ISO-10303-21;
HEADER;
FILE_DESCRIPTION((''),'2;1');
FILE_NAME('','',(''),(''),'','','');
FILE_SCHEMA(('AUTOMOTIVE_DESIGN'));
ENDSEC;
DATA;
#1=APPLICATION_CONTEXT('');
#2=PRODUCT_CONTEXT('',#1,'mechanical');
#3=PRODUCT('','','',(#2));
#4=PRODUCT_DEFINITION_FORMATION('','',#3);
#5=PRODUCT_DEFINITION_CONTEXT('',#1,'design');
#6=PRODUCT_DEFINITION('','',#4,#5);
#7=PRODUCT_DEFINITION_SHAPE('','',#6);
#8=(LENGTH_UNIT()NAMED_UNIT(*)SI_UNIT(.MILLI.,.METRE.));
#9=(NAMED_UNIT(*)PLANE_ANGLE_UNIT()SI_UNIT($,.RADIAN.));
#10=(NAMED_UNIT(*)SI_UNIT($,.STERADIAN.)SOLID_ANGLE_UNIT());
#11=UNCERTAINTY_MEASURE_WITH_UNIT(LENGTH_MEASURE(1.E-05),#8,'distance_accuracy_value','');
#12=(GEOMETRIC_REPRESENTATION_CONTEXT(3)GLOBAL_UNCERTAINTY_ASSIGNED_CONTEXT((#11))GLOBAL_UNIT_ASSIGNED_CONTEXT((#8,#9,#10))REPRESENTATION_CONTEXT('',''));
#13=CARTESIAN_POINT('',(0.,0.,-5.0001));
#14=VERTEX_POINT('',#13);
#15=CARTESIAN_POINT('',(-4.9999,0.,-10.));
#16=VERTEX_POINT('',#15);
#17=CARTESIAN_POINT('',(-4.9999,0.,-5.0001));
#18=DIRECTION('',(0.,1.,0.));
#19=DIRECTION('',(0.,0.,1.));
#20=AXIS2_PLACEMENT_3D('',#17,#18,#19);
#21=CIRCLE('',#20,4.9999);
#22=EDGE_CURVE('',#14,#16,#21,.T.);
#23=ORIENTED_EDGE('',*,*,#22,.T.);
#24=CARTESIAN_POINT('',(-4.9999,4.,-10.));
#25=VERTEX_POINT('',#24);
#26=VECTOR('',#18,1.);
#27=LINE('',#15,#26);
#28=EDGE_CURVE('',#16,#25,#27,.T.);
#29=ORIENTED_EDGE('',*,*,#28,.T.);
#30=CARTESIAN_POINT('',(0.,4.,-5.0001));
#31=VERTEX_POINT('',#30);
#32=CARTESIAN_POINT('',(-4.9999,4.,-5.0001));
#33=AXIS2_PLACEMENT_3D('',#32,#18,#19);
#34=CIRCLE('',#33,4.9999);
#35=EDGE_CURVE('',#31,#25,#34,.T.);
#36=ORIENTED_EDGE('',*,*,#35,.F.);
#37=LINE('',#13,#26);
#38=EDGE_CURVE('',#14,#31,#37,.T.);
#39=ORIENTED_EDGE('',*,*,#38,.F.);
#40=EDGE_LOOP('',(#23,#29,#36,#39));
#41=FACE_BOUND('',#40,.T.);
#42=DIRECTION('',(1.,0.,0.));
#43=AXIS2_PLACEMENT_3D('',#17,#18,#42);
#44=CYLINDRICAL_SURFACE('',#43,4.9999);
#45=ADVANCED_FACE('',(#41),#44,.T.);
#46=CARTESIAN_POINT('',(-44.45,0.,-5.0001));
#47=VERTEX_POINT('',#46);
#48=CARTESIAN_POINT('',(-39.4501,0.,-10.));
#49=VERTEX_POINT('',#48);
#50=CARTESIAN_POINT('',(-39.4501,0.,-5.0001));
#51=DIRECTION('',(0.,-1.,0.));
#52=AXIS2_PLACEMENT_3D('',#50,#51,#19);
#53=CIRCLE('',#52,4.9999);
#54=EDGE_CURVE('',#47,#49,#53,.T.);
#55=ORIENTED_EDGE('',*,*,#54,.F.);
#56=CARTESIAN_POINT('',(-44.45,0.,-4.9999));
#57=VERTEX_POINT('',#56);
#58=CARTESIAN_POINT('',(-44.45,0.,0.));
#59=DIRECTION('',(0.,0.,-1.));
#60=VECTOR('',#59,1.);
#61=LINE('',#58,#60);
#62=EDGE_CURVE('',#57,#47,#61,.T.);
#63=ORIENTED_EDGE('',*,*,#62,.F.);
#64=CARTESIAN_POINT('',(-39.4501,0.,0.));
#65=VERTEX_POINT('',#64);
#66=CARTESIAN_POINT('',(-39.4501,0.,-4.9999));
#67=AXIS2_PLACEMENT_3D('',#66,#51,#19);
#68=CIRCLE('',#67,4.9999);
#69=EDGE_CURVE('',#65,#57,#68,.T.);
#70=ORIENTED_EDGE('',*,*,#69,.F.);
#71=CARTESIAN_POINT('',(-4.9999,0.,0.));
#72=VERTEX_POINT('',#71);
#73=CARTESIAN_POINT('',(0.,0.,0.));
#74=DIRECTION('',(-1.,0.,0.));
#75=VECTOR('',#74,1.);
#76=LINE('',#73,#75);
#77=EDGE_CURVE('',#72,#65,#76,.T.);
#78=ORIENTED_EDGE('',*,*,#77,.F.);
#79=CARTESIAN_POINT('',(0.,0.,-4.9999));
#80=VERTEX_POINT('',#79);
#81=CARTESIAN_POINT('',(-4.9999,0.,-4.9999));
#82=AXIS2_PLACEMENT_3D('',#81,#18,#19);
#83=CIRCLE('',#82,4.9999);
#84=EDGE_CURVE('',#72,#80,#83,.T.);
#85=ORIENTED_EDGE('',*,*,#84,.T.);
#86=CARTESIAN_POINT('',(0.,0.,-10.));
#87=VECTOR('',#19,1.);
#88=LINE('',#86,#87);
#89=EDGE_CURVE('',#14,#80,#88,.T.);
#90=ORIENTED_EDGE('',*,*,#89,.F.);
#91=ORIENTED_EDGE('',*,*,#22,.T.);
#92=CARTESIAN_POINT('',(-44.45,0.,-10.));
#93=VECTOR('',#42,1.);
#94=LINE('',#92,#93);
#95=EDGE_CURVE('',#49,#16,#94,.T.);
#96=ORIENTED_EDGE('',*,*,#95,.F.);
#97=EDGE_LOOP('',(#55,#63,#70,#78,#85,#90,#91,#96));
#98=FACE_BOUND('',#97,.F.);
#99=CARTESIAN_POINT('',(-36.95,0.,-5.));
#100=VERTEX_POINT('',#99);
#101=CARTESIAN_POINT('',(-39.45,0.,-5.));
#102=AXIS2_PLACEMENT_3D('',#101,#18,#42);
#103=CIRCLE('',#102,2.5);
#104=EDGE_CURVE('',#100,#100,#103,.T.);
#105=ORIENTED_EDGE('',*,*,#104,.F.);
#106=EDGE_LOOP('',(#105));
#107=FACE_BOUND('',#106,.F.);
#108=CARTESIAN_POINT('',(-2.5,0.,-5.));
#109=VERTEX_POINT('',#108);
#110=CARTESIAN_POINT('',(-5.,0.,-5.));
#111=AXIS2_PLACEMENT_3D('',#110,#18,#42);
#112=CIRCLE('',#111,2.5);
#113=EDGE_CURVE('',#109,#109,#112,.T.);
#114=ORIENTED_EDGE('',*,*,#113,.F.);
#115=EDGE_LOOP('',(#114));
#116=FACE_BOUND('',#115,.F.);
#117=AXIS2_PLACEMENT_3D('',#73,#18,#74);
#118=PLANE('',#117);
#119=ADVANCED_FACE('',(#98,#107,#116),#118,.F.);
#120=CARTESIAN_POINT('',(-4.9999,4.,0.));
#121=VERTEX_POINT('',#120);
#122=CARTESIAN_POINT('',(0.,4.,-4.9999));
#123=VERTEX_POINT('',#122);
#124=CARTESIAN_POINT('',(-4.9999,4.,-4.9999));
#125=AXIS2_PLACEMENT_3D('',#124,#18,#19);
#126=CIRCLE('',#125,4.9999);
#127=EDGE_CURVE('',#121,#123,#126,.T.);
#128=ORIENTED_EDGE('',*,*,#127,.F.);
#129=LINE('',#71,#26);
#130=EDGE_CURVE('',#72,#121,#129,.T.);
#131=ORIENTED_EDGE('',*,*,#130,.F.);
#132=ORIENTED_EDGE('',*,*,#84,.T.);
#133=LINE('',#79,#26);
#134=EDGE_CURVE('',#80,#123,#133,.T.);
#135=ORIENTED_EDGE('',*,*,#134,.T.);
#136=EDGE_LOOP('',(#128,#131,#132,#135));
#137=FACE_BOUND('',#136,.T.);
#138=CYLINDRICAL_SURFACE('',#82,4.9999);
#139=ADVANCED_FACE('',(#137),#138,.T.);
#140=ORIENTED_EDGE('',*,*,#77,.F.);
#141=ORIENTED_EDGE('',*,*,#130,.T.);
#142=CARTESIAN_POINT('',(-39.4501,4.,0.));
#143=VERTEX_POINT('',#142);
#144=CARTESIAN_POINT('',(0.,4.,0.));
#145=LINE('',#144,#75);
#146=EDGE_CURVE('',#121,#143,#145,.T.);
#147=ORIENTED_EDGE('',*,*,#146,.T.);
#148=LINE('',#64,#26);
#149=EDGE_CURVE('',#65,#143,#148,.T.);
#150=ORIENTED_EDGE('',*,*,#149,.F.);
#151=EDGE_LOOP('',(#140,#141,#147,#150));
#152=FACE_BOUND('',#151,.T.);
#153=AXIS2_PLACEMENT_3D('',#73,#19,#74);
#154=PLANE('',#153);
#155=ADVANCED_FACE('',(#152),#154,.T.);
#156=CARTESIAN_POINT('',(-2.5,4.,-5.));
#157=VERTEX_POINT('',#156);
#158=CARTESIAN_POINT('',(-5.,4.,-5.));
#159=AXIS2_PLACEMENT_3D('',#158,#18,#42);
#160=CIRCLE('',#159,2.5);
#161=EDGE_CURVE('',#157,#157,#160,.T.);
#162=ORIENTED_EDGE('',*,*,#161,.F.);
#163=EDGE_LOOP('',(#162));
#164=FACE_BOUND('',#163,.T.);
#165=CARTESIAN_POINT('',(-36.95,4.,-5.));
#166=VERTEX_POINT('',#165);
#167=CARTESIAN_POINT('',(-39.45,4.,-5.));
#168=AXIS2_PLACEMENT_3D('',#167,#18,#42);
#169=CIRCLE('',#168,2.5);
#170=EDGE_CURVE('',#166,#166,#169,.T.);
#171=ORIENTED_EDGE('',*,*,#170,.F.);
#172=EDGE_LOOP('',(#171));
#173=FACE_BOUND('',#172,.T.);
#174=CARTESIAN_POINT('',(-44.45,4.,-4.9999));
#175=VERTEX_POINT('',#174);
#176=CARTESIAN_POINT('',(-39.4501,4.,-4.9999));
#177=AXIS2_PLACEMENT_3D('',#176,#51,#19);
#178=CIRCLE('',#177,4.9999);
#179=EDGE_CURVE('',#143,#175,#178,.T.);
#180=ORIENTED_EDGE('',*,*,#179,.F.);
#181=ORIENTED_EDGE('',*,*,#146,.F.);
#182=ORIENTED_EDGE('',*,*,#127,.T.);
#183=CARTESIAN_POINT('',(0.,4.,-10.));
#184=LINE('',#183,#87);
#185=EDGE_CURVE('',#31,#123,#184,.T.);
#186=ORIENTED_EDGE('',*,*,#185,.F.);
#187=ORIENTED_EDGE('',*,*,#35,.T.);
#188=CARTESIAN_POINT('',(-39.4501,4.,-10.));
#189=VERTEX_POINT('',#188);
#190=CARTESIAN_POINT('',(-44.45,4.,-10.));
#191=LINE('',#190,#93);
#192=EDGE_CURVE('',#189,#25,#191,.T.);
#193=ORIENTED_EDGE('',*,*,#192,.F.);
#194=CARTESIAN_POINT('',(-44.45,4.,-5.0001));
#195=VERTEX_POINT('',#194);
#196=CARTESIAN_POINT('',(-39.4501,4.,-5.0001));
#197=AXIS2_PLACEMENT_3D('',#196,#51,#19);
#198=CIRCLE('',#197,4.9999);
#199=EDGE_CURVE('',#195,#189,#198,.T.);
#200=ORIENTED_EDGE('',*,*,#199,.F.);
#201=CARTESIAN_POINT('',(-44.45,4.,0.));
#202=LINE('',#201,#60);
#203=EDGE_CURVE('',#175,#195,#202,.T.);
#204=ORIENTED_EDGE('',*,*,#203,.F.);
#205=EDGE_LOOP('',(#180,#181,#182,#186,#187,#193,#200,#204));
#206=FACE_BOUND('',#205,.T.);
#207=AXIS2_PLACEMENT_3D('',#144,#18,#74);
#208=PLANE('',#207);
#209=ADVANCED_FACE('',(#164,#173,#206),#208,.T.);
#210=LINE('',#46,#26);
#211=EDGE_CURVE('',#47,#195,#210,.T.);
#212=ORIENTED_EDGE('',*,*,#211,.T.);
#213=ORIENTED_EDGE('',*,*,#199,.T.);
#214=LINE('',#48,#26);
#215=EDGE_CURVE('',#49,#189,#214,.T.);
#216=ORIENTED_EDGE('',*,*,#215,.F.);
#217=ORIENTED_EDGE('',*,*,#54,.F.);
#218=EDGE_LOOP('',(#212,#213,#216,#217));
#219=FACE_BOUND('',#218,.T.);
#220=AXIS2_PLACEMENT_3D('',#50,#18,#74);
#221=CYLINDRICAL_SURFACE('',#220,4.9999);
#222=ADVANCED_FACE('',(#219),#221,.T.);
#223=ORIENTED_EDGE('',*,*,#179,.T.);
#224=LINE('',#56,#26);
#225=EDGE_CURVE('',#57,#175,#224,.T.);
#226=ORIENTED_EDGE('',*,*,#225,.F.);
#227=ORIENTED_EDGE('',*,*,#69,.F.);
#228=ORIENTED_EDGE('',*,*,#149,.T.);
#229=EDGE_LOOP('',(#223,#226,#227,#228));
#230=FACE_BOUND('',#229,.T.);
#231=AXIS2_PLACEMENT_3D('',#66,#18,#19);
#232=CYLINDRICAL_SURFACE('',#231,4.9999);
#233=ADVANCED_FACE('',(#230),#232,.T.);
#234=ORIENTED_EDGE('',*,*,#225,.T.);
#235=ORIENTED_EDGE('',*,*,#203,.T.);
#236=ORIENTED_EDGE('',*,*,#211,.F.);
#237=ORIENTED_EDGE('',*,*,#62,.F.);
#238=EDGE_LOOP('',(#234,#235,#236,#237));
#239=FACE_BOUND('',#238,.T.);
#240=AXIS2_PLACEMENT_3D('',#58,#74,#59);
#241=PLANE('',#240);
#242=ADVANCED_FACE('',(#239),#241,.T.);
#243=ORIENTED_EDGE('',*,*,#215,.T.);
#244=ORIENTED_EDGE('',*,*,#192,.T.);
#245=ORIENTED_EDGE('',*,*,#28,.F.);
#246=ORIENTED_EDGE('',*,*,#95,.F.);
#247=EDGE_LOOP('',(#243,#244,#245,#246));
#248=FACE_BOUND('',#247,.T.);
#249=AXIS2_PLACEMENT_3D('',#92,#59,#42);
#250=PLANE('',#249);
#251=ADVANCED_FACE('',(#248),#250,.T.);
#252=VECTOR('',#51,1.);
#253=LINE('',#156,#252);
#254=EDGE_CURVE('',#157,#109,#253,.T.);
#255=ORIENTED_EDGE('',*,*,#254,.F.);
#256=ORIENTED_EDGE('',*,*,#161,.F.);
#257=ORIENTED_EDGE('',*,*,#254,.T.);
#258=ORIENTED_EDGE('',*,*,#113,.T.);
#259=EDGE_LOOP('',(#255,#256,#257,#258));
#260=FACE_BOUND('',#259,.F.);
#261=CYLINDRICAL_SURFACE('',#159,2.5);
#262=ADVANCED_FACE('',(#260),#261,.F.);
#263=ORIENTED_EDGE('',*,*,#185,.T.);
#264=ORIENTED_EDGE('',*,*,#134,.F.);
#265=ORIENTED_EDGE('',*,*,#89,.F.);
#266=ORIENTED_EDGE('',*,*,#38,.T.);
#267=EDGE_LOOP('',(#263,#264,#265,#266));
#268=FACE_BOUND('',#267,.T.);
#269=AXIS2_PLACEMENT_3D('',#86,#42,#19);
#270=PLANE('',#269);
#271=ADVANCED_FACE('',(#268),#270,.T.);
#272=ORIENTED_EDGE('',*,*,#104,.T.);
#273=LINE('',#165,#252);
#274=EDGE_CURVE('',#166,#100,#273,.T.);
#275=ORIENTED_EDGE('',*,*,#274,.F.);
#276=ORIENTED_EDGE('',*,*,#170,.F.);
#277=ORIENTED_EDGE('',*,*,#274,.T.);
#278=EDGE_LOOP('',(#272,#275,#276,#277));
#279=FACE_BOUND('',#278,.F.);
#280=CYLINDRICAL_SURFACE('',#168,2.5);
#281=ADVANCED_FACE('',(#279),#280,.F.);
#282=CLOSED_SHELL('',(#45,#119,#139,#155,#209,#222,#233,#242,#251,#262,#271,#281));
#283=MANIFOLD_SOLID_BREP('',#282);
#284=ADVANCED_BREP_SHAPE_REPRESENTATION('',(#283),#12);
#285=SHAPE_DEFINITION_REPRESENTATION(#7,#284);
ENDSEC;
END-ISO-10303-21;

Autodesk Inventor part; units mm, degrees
ref_plane "YZ Plane" through (0, 0, 0) normal (1, 0, 0) x (0, 1, 0)
ref_plane "XZ Plane" through (0, 0, 0) normal (0, 1, 0) x (-1, 0, 0)
ref_plane "XY Plane" through (0, 0, 0) normal (0, 0, 1) x (1, 0, 0)
sketch "Sketch1" plane through (0, 0, 0) normal (0, 1, 0) x (-1, 0, 0)
  line L0 (0, 0) -> (44.45, 0)
  line L1 (44.45, 0) -> (44.45, -10)
  line L2 (44.45, -10) -> (0, -10)
  line L3 (0, -10) -> (0, 0)
  dimension "d0" = 44.45
  dimension "d1" = 10
extrude "Extrusion1" add sketch "Sketch1" along normal blind 4
sketch "Sketch2" plane through (0, 4, 0) normal (0, 1, 0) x (1, 0, 0)
  circle A0 centre (-39.45, 5) radius 2.5
  circle A1 centre (-5, 5) radius 2.5
  line L0 (-44.45, 10) -> (-44.45, 0) projected
  point P0 (0, 0)
  dimension "d4" = 5
  dimension "d5" = 5
  dimension "d6" = 5
  dimension "d7" = 5
  dimension "d8" = 5
extrude "Extrusion2" cut sketch "Sketch2" against normal blind 8
fillet "Fillet1" radius 5 4 edges at (-44.45, 2, 0) (0, 2, 0) (0, 2, -10) (-44.45, 2, -10)
properties part number "Linkage" material "Aluminum 6061"
